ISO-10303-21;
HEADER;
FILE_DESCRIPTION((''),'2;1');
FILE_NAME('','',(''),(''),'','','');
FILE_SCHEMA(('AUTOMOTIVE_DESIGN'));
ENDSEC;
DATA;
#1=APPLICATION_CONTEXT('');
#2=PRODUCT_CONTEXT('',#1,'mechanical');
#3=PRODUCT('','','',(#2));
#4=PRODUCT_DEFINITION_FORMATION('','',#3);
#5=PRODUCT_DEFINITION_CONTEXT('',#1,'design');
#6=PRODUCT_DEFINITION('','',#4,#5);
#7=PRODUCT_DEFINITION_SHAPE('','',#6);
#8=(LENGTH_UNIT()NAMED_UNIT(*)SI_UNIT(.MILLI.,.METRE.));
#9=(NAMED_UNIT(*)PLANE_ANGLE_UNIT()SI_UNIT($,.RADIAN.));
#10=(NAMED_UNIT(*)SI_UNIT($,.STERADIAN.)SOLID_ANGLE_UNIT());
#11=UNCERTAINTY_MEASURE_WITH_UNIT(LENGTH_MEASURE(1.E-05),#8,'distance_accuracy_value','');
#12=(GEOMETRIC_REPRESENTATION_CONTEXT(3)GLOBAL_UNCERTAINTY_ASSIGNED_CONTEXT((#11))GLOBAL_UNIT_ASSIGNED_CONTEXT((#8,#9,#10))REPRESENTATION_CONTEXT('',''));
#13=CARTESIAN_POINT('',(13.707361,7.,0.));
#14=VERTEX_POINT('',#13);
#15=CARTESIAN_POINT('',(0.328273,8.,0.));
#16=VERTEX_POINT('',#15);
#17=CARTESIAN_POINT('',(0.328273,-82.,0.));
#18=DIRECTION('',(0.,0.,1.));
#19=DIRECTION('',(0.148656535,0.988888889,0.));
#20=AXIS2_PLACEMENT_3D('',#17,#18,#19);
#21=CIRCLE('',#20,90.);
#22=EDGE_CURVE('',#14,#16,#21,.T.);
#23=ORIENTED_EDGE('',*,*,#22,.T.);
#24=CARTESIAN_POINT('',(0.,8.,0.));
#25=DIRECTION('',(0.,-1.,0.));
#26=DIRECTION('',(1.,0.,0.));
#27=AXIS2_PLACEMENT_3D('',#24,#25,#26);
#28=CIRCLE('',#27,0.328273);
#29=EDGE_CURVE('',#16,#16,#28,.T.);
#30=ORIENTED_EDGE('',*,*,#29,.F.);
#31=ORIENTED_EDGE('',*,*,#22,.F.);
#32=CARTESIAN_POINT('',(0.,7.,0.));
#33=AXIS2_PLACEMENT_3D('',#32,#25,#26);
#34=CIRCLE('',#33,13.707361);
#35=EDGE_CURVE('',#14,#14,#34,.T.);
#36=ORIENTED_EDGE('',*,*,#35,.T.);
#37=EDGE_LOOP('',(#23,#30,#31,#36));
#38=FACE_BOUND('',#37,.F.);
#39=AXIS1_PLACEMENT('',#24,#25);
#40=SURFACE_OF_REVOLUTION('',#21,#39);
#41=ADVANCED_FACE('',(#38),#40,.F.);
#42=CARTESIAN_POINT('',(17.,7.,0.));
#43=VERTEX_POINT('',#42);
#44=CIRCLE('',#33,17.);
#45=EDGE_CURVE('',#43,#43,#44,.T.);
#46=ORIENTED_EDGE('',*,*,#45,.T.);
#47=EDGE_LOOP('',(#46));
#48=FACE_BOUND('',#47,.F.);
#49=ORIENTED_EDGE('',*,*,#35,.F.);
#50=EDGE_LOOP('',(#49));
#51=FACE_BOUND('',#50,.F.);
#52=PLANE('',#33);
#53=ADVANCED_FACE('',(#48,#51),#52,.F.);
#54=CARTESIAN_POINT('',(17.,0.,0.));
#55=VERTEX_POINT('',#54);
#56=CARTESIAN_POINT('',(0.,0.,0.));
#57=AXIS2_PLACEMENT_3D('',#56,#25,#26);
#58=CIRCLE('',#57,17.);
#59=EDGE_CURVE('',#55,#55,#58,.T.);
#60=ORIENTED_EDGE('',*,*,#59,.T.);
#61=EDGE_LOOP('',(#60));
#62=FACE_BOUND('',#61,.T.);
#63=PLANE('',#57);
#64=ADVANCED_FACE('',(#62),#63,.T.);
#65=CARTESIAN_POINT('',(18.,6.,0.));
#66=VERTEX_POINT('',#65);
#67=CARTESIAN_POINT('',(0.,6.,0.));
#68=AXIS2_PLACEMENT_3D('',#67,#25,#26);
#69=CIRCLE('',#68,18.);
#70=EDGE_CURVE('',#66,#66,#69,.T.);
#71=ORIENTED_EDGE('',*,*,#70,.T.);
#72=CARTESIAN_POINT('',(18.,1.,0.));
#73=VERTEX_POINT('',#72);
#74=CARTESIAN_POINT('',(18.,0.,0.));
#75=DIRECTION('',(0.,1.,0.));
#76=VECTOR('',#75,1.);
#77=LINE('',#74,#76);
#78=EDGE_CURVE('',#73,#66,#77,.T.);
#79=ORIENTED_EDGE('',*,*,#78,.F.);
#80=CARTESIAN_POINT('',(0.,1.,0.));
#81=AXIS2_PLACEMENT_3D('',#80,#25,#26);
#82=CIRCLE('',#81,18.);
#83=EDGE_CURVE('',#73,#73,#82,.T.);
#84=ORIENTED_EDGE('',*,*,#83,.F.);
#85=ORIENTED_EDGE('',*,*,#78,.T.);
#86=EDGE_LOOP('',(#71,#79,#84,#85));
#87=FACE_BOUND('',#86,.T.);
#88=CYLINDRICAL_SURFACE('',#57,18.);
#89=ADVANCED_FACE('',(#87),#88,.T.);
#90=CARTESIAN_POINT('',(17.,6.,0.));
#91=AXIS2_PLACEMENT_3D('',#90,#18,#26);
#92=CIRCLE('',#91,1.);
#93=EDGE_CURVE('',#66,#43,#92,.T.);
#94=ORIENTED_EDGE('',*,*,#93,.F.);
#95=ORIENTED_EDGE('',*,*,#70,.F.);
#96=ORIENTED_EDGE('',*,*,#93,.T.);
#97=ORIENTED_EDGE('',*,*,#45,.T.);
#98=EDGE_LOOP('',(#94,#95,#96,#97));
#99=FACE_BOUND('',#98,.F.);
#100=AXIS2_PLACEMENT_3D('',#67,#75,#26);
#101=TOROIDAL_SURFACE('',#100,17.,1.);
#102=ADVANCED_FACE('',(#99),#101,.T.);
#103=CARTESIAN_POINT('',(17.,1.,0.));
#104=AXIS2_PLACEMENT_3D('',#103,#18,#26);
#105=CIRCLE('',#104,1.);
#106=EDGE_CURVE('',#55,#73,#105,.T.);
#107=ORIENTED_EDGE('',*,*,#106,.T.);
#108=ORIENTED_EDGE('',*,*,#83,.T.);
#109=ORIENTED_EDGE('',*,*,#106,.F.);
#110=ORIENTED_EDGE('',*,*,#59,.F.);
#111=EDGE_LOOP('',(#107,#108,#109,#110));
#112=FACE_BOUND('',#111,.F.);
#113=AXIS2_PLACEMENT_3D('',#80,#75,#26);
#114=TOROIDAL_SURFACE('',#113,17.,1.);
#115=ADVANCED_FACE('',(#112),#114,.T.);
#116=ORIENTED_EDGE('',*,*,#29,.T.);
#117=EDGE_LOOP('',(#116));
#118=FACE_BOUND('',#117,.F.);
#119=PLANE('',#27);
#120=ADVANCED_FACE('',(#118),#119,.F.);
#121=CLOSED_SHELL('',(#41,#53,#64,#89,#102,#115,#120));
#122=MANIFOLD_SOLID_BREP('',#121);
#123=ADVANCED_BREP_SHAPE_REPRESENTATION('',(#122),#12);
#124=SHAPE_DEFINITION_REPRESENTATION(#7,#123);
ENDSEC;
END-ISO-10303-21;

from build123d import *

# Parameters (mm, degrees)
F0_R     = 18
F0_R_2   = 13.6738896343
F2_DEPTH = 7
F1_R     = 13.7073607276
F3_DEPTH = 8
F4_R     = 1


# Not quite as in the source:
# - a fillet or chamfer that OpenCascade refuses, or shapes differently, is made with other operations: its cross-section is extruded or revolved along the edge and cut away or added


with BuildPart() as f2:
    # F0 (on Front) → F2 (new body)
    with BuildSketch(Plane.XZ):
        Circle(F0_R)
        Circle(F0_R_2, mode=Mode.SUBTRACT)
    extrude(amount=-F2_DEPTH)

    # F1 (on Front) → F3 (join)
    with BuildSketch(Plane.XZ):
        Circle(F1_R)
    extrude(amount=-F3_DEPTH)

    # F4
    f4_edges = [f2.edges().sort_by_distance(p)[0] for p in [
        (18, 3.5, 0),
        (-18, 0, 0),
        (-18, 7, 0),
    ]]
    fillet(f4_edges, radius=F4_R)

    # F5: fillet of radius 90 on 1 edges, made by hand

    # F5_s1 → F5_t2 (revolve, cut)
    with BuildSketch(Plane.XY):
        with BuildLine():
            ThreePointArc((13.7073607276, 7), (7.0364764999, 7.7496518099), (0.3282725674, 8))
            Line((0.3282725674, 8), (13.7073607276, 8))
            Line((13.7073607276, 8), (13.7073607276, 7))
        make_face()
    revolve(axis=Axis((0, 8, 0), (0, -1, 0)), mode=Mode.SUBTRACT)


solid = f2.part
